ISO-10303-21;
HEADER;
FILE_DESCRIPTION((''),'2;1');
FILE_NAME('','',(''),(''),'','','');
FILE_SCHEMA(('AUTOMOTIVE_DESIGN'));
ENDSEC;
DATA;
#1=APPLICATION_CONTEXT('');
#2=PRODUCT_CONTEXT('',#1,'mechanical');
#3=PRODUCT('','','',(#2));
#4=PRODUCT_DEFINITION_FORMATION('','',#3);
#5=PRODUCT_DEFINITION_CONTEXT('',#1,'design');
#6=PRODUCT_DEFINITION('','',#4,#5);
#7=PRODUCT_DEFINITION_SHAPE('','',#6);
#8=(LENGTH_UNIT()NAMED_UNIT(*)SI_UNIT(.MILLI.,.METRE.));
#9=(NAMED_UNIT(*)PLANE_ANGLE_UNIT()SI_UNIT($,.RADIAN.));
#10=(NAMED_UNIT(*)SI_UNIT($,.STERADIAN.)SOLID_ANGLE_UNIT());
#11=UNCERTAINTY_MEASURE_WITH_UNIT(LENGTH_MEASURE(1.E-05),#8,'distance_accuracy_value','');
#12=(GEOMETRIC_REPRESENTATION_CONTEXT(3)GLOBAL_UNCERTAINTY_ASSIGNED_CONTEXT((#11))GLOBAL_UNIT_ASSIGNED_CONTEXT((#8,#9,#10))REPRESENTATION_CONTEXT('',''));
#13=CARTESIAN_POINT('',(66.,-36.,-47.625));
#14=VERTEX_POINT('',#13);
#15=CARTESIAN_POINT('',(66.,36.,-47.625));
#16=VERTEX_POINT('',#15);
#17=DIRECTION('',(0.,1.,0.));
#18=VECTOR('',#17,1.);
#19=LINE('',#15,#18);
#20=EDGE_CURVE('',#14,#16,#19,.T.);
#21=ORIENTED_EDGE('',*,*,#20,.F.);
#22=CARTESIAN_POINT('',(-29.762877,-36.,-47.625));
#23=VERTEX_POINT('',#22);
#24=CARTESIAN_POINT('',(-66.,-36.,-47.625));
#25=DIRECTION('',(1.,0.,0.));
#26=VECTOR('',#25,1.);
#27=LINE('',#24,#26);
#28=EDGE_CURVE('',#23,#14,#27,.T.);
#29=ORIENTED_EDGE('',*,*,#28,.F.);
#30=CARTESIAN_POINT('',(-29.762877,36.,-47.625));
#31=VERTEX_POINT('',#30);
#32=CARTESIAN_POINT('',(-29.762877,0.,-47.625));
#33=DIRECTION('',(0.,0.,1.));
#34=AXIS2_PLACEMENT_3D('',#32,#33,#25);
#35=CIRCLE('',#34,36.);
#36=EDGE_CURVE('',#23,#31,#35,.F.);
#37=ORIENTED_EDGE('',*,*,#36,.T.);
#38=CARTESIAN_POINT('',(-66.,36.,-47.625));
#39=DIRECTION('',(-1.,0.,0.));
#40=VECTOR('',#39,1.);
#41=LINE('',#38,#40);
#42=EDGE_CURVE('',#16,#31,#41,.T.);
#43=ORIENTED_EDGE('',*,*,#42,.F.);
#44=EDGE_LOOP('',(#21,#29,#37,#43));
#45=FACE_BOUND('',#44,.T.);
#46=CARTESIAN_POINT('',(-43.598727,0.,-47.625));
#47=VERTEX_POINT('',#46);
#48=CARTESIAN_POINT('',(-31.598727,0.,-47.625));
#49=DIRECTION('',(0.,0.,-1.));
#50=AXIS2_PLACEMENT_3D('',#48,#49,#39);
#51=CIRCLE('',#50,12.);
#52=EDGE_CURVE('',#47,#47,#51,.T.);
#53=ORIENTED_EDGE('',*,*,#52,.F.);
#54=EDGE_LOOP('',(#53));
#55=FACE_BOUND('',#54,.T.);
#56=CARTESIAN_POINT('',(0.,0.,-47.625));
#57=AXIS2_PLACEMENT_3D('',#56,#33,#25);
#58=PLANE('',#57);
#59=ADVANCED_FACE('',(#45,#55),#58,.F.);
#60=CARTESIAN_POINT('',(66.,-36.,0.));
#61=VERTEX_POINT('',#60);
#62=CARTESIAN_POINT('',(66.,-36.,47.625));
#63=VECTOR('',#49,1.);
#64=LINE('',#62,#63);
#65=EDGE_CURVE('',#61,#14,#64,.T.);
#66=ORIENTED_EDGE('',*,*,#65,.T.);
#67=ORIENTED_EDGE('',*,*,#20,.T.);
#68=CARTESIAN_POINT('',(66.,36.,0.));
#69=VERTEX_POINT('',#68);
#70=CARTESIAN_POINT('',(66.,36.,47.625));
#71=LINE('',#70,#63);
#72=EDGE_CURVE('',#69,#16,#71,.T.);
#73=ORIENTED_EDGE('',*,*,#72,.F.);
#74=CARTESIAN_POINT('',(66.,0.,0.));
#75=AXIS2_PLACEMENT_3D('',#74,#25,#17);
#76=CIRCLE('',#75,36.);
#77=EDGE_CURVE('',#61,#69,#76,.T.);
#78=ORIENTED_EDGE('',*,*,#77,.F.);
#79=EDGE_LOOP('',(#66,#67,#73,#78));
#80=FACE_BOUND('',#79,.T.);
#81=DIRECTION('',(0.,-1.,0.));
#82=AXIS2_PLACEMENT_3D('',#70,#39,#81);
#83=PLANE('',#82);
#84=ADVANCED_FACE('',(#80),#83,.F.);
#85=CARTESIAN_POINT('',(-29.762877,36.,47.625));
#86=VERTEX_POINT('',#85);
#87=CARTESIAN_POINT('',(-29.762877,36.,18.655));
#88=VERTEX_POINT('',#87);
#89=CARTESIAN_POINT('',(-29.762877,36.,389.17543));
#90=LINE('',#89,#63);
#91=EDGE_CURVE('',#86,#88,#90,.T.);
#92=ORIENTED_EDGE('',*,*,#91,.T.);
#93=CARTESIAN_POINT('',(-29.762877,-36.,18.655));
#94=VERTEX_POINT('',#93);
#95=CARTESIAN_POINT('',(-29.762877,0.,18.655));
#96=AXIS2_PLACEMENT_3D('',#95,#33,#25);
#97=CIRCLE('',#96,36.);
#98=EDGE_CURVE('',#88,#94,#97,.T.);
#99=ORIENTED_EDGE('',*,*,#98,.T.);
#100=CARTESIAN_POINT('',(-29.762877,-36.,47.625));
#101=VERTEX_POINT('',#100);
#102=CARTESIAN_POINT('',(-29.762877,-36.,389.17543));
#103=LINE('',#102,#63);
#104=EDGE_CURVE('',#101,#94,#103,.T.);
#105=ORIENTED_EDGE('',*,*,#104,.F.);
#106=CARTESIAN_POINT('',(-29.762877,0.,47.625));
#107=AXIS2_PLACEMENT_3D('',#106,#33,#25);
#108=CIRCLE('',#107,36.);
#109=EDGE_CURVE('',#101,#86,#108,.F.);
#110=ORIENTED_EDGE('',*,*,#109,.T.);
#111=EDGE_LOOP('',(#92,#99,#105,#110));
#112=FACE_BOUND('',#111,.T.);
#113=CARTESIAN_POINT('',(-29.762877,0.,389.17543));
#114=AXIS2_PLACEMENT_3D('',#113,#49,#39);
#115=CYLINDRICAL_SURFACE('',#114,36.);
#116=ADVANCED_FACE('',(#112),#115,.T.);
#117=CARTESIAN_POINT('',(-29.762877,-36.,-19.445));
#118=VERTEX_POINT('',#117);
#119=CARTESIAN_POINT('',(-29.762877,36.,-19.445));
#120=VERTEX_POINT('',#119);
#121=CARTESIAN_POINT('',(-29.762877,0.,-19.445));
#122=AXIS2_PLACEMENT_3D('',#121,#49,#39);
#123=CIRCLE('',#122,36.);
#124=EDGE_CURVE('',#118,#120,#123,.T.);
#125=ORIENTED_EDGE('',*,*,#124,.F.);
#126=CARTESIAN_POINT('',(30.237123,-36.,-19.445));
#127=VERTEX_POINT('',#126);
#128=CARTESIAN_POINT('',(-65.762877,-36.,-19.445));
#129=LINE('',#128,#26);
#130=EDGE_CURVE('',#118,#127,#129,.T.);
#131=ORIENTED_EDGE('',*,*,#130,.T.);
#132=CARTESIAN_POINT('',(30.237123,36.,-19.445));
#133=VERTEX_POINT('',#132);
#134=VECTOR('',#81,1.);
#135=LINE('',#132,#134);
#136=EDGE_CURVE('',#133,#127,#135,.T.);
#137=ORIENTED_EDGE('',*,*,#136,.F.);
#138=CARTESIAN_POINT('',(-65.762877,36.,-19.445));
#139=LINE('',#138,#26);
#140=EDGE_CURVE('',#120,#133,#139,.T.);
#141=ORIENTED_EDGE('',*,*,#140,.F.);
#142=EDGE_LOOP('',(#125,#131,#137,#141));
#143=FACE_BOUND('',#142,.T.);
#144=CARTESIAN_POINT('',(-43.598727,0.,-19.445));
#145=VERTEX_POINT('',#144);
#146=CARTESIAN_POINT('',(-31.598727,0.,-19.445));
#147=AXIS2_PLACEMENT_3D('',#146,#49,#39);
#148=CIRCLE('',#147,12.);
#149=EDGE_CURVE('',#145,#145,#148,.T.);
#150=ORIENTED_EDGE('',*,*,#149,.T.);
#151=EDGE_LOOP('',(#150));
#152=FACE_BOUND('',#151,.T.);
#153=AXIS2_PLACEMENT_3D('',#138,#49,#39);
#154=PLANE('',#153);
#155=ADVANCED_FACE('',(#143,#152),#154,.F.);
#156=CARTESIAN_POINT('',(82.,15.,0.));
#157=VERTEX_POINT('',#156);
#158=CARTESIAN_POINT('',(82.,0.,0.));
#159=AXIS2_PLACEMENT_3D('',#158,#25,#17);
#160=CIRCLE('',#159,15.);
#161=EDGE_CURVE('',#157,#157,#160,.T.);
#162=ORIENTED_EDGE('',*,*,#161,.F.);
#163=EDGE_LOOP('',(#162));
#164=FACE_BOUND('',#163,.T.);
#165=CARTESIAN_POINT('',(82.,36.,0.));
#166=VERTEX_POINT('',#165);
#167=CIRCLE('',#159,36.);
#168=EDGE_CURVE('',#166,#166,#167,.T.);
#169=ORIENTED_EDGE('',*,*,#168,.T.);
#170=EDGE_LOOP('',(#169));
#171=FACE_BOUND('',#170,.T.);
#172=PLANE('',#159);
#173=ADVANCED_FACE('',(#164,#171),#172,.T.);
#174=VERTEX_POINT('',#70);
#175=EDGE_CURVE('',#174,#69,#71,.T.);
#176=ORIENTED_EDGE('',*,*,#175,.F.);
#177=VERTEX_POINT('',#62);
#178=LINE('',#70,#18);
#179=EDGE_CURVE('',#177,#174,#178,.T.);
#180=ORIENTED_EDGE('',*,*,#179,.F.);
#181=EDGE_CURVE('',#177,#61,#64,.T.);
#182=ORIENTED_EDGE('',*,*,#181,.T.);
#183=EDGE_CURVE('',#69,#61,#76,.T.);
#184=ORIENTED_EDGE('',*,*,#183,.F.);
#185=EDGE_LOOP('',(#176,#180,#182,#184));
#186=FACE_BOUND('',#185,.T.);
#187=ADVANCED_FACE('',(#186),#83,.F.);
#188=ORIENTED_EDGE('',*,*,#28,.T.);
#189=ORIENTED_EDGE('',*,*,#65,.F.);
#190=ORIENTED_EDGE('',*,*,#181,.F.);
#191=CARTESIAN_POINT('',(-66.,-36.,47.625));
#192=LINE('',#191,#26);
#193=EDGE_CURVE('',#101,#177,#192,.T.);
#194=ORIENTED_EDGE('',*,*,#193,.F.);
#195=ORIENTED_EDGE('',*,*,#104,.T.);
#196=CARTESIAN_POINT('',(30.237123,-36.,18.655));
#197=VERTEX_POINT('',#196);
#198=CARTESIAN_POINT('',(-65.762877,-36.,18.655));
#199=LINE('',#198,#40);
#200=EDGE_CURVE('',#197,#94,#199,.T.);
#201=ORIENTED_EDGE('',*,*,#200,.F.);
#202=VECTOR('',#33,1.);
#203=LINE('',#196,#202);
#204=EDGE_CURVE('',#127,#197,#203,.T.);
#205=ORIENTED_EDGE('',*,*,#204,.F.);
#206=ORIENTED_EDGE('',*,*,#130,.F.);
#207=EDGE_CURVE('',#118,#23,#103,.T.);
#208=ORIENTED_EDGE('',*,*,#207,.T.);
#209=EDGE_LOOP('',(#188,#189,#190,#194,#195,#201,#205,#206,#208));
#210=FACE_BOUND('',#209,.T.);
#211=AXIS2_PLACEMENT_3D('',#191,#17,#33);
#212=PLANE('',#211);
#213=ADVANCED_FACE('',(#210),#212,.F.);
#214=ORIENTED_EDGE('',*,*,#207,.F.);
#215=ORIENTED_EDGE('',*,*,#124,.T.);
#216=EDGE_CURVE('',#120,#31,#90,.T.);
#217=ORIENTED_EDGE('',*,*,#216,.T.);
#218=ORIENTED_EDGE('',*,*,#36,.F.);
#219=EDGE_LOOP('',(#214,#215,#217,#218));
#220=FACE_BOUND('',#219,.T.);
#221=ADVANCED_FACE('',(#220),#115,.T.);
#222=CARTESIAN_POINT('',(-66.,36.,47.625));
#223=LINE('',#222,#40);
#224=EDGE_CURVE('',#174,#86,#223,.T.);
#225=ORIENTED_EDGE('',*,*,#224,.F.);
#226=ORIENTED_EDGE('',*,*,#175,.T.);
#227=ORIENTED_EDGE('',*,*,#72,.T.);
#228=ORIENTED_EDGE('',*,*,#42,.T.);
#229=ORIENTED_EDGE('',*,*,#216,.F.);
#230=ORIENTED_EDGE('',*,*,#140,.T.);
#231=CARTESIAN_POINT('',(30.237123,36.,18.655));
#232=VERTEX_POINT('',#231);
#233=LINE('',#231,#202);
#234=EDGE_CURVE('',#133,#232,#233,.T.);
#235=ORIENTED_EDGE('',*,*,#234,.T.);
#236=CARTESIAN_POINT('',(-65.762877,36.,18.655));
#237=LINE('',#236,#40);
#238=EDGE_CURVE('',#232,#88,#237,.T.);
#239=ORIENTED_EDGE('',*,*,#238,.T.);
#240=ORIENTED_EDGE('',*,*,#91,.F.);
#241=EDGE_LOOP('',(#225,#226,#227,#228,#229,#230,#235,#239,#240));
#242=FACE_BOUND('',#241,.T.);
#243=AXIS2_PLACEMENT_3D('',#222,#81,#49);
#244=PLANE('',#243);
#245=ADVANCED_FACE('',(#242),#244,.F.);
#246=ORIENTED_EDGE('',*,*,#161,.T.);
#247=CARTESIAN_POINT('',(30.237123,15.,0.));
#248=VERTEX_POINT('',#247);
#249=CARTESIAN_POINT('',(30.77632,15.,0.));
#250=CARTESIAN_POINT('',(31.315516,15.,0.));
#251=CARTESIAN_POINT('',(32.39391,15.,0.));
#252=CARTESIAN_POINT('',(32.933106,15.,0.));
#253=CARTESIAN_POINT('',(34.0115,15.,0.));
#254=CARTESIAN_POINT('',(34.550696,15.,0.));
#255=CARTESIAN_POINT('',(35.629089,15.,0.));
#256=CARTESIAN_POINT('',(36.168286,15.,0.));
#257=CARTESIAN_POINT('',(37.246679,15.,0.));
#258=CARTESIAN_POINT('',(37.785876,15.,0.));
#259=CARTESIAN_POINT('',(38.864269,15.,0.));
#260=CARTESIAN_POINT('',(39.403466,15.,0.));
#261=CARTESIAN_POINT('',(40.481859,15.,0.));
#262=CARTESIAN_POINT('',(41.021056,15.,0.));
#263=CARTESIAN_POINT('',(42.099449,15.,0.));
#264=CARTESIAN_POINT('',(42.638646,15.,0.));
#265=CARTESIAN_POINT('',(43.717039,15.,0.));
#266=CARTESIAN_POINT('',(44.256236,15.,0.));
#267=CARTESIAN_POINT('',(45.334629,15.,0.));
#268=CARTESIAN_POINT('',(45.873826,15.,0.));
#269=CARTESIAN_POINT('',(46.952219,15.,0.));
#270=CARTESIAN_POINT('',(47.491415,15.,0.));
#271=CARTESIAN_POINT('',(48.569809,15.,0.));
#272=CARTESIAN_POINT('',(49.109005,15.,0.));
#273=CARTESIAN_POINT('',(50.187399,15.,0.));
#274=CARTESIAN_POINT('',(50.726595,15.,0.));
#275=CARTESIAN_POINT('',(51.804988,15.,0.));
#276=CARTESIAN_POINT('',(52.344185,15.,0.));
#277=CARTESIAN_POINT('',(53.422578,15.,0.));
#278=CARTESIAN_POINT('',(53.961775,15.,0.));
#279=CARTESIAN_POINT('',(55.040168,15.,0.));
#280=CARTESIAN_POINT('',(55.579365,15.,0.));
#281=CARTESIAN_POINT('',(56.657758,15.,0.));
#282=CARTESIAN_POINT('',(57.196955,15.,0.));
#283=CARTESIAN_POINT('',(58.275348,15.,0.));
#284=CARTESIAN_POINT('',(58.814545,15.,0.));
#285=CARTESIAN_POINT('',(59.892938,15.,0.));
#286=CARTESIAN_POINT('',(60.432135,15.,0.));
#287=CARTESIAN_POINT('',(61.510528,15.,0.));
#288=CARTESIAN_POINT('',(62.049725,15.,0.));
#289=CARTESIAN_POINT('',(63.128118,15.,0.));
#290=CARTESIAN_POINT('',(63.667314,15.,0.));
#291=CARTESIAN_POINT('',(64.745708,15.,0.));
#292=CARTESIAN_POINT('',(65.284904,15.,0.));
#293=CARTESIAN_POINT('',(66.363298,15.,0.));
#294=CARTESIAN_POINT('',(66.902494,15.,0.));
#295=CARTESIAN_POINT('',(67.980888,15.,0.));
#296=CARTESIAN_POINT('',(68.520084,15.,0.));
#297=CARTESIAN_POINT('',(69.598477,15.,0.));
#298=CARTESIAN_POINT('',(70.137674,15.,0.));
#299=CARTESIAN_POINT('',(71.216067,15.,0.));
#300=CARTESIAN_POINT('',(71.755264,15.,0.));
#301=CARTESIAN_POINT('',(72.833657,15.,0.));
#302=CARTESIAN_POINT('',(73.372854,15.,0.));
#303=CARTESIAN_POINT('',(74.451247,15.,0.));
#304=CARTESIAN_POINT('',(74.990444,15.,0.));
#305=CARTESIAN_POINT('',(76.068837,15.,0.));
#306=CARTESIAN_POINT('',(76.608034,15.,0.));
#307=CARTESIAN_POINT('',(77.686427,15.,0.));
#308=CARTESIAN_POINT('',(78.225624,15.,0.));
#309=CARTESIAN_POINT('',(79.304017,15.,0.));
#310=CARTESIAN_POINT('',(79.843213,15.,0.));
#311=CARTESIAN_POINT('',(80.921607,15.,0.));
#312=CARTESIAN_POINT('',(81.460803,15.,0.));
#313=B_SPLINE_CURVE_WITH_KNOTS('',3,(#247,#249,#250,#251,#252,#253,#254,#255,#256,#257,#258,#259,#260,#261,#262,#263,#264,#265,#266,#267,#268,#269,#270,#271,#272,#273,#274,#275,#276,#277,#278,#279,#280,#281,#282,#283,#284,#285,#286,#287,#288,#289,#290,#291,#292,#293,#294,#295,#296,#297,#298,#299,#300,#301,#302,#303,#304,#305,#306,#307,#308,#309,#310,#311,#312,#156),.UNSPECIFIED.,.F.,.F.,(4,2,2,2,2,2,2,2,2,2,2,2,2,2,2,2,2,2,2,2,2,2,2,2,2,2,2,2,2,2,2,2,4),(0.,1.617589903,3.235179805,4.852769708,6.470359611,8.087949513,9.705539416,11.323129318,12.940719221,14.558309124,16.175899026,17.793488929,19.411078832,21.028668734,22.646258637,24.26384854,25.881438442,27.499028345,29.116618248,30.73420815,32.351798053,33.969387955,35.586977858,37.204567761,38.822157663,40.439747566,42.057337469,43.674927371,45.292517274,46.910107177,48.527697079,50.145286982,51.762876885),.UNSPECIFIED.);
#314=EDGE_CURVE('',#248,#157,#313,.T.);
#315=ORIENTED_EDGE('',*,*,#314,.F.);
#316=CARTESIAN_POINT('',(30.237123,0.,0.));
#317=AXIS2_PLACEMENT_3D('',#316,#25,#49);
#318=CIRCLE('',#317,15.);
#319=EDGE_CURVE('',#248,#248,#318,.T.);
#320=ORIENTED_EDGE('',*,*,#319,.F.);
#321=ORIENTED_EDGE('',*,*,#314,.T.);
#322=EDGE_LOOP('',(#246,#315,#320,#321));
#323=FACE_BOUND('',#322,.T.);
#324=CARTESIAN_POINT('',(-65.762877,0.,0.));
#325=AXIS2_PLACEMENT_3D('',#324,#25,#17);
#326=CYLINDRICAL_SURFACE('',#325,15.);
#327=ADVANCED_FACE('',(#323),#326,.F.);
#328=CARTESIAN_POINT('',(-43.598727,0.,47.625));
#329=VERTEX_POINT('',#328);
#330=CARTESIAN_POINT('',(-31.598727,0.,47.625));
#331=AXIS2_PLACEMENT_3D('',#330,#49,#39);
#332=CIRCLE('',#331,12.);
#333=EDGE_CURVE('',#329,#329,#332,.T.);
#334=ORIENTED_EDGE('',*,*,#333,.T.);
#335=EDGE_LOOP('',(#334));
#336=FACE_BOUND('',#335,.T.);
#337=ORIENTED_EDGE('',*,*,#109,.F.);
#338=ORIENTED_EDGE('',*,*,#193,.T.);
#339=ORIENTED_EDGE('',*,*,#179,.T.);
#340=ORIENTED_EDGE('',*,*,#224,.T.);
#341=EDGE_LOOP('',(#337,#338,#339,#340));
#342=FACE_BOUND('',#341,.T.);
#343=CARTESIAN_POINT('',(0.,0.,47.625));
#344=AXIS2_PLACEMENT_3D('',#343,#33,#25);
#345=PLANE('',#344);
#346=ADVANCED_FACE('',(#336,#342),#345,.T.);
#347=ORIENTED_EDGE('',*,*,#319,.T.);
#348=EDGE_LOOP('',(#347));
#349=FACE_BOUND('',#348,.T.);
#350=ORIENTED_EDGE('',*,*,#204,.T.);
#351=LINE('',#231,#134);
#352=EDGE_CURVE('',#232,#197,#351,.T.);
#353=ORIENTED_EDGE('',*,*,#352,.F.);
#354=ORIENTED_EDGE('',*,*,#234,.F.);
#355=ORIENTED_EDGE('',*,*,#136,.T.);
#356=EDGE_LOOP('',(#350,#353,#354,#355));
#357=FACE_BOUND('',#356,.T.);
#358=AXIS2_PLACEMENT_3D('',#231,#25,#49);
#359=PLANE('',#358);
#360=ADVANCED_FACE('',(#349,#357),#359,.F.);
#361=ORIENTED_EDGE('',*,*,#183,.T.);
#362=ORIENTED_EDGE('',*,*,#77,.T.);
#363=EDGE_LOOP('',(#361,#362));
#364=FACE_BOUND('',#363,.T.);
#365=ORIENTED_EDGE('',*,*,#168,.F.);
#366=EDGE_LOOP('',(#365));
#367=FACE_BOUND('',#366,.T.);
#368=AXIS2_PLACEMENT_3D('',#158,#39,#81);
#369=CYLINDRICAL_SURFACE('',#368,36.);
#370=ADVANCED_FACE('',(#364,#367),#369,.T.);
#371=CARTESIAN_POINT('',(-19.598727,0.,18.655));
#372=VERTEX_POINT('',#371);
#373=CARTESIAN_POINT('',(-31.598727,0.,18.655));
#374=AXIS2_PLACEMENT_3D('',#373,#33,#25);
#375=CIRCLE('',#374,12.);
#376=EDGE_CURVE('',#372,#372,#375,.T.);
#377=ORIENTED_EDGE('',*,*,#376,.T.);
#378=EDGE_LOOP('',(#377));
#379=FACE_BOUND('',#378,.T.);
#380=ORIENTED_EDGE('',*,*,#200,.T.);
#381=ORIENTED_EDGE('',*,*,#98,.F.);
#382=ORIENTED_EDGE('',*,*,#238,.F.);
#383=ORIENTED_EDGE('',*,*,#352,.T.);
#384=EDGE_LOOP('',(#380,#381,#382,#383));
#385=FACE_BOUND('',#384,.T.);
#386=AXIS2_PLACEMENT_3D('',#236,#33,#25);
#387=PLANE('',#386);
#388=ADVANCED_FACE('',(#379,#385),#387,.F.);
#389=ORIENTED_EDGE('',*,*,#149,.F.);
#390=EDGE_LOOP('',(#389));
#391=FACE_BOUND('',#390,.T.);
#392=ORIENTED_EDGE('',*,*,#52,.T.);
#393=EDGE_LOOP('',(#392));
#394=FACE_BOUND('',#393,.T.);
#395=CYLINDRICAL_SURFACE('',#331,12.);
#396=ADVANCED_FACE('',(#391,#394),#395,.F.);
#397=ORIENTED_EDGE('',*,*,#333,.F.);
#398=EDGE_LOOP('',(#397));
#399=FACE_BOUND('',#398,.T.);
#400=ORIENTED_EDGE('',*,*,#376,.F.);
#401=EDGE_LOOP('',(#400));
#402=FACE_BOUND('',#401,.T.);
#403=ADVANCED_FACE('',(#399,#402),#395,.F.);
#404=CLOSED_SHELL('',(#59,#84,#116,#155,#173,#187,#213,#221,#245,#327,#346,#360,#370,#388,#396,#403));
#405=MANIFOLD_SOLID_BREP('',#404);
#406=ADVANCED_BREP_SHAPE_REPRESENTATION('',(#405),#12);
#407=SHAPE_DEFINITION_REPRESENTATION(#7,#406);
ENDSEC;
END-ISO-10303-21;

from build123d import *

# Parameters (mm, degrees)
SKETCH1_W           = 132
SKETCH1_H           = 72
BOSS_EXTRUDE1_DEPTH = 47.625
CUT_EXTRUDE1_START  = -95.25
CUT_EXTRUDE1_DEPTH  = 95.25
SKETCH3_W           = 96
SKETCH3_H           = 38.1
CUT_EXTRUDE2_DEPTH  = 109.665268715
SKETCH4_R           = 15
CUT_EXTRUDE3_DEPTH  = 145.656822687
BOSS_EXTRUDE2_START = 16
SKETCH5_R           = 36
SKETCH5_R_2         = 15
BOSS_EXTRUDE2_DEPTH = 16
SKETCH6_R           = 12
CUT_EXTRUDE4_DEPTH  = 131.738527221


# Read off the part's stored shape, not the designer's step: Cut-Extrude1
with BuildPart() as part:
    # Sketch1 → Boss-Extrude1 (new, symmetric)
    with BuildSketch(Plane.XY):
        Rectangle(SKETCH1_W, SKETCH1_H)
    extrude(amount=BOSS_EXTRUDE1_DEPTH, both=True)

    # Cut-Extrude1 outline → Cut-Extrude1 (cut)
    with BuildSketch(Plane.XY.offset(47.625).offset(CUT_EXTRUDE1_START)):
        with BuildLine():
            Line((-66, -36), (-29.762876885, -36))
            ThreePointArc((-29.762876885, -36), (-65.762876885, 0), (-29.762876885, 36))
            Line((-29.762876885, 36), (-66, 36))
            Line((-66, 36), (-66, -36))
        make_face()
    extrude(amount=CUT_EXTRUDE1_DEPTH, mode=Mode.SUBTRACT)

    # Sketch3 → Cut-Extrude2 (cut, through all)
    with BuildSketch(Plane.XZ.offset(36)):
        with Locations((-17.762876885, -0.395)):
            Rectangle(SKETCH3_W, SKETCH3_H)
    extrude(amount=-CUT_EXTRUDE2_DEPTH, mode=Mode.SUBTRACT)

    # Sketch4 → Cut-Extrude3 (cut, through all)
    with BuildSketch(Plane(origin=(66, 0, 0), x_dir=(0, 0, -1), z_dir=(1, 0, 0))):
        with Locations(Location((0, 0, 0), (0, 0, 90))):
            Circle(SKETCH4_R)
    extrude(amount=-CUT_EXTRUDE3_DEPTH, mode=Mode.SUBTRACT)

    # Sketch5 → Boss-Extrude2 (add)
    with BuildSketch(Plane(origin=(66, 0, 0), x_dir=(0, 0, -1), z_dir=(1, 0, 0)).offset(BOSS_EXTRUDE2_START)):
        with Locations(Location((0, 0, 0), (0, 0, 90))):
            Circle(SKETCH5_R)
        with Locations(Location((0, 0, 0), (0, 0, 90))):
            Circle(SKETCH5_R_2, mode=Mode.SUBTRACT)
    extrude(amount=-BOSS_EXTRUDE2_DEPTH)

    # Sketch6 → Cut-Extrude4 (cut, through all)
    with BuildSketch(Plane(origin=(0, 0, -47.625), x_dir=(-1, 0, 0), z_dir=(0, 0, -1))):
        with Locations((31.598726765, 0)):
            Circle(SKETCH6_R)
    extrude(amount=-CUT_EXTRUDE4_DEPTH, mode=Mode.SUBTRACT)


solid = part.part
